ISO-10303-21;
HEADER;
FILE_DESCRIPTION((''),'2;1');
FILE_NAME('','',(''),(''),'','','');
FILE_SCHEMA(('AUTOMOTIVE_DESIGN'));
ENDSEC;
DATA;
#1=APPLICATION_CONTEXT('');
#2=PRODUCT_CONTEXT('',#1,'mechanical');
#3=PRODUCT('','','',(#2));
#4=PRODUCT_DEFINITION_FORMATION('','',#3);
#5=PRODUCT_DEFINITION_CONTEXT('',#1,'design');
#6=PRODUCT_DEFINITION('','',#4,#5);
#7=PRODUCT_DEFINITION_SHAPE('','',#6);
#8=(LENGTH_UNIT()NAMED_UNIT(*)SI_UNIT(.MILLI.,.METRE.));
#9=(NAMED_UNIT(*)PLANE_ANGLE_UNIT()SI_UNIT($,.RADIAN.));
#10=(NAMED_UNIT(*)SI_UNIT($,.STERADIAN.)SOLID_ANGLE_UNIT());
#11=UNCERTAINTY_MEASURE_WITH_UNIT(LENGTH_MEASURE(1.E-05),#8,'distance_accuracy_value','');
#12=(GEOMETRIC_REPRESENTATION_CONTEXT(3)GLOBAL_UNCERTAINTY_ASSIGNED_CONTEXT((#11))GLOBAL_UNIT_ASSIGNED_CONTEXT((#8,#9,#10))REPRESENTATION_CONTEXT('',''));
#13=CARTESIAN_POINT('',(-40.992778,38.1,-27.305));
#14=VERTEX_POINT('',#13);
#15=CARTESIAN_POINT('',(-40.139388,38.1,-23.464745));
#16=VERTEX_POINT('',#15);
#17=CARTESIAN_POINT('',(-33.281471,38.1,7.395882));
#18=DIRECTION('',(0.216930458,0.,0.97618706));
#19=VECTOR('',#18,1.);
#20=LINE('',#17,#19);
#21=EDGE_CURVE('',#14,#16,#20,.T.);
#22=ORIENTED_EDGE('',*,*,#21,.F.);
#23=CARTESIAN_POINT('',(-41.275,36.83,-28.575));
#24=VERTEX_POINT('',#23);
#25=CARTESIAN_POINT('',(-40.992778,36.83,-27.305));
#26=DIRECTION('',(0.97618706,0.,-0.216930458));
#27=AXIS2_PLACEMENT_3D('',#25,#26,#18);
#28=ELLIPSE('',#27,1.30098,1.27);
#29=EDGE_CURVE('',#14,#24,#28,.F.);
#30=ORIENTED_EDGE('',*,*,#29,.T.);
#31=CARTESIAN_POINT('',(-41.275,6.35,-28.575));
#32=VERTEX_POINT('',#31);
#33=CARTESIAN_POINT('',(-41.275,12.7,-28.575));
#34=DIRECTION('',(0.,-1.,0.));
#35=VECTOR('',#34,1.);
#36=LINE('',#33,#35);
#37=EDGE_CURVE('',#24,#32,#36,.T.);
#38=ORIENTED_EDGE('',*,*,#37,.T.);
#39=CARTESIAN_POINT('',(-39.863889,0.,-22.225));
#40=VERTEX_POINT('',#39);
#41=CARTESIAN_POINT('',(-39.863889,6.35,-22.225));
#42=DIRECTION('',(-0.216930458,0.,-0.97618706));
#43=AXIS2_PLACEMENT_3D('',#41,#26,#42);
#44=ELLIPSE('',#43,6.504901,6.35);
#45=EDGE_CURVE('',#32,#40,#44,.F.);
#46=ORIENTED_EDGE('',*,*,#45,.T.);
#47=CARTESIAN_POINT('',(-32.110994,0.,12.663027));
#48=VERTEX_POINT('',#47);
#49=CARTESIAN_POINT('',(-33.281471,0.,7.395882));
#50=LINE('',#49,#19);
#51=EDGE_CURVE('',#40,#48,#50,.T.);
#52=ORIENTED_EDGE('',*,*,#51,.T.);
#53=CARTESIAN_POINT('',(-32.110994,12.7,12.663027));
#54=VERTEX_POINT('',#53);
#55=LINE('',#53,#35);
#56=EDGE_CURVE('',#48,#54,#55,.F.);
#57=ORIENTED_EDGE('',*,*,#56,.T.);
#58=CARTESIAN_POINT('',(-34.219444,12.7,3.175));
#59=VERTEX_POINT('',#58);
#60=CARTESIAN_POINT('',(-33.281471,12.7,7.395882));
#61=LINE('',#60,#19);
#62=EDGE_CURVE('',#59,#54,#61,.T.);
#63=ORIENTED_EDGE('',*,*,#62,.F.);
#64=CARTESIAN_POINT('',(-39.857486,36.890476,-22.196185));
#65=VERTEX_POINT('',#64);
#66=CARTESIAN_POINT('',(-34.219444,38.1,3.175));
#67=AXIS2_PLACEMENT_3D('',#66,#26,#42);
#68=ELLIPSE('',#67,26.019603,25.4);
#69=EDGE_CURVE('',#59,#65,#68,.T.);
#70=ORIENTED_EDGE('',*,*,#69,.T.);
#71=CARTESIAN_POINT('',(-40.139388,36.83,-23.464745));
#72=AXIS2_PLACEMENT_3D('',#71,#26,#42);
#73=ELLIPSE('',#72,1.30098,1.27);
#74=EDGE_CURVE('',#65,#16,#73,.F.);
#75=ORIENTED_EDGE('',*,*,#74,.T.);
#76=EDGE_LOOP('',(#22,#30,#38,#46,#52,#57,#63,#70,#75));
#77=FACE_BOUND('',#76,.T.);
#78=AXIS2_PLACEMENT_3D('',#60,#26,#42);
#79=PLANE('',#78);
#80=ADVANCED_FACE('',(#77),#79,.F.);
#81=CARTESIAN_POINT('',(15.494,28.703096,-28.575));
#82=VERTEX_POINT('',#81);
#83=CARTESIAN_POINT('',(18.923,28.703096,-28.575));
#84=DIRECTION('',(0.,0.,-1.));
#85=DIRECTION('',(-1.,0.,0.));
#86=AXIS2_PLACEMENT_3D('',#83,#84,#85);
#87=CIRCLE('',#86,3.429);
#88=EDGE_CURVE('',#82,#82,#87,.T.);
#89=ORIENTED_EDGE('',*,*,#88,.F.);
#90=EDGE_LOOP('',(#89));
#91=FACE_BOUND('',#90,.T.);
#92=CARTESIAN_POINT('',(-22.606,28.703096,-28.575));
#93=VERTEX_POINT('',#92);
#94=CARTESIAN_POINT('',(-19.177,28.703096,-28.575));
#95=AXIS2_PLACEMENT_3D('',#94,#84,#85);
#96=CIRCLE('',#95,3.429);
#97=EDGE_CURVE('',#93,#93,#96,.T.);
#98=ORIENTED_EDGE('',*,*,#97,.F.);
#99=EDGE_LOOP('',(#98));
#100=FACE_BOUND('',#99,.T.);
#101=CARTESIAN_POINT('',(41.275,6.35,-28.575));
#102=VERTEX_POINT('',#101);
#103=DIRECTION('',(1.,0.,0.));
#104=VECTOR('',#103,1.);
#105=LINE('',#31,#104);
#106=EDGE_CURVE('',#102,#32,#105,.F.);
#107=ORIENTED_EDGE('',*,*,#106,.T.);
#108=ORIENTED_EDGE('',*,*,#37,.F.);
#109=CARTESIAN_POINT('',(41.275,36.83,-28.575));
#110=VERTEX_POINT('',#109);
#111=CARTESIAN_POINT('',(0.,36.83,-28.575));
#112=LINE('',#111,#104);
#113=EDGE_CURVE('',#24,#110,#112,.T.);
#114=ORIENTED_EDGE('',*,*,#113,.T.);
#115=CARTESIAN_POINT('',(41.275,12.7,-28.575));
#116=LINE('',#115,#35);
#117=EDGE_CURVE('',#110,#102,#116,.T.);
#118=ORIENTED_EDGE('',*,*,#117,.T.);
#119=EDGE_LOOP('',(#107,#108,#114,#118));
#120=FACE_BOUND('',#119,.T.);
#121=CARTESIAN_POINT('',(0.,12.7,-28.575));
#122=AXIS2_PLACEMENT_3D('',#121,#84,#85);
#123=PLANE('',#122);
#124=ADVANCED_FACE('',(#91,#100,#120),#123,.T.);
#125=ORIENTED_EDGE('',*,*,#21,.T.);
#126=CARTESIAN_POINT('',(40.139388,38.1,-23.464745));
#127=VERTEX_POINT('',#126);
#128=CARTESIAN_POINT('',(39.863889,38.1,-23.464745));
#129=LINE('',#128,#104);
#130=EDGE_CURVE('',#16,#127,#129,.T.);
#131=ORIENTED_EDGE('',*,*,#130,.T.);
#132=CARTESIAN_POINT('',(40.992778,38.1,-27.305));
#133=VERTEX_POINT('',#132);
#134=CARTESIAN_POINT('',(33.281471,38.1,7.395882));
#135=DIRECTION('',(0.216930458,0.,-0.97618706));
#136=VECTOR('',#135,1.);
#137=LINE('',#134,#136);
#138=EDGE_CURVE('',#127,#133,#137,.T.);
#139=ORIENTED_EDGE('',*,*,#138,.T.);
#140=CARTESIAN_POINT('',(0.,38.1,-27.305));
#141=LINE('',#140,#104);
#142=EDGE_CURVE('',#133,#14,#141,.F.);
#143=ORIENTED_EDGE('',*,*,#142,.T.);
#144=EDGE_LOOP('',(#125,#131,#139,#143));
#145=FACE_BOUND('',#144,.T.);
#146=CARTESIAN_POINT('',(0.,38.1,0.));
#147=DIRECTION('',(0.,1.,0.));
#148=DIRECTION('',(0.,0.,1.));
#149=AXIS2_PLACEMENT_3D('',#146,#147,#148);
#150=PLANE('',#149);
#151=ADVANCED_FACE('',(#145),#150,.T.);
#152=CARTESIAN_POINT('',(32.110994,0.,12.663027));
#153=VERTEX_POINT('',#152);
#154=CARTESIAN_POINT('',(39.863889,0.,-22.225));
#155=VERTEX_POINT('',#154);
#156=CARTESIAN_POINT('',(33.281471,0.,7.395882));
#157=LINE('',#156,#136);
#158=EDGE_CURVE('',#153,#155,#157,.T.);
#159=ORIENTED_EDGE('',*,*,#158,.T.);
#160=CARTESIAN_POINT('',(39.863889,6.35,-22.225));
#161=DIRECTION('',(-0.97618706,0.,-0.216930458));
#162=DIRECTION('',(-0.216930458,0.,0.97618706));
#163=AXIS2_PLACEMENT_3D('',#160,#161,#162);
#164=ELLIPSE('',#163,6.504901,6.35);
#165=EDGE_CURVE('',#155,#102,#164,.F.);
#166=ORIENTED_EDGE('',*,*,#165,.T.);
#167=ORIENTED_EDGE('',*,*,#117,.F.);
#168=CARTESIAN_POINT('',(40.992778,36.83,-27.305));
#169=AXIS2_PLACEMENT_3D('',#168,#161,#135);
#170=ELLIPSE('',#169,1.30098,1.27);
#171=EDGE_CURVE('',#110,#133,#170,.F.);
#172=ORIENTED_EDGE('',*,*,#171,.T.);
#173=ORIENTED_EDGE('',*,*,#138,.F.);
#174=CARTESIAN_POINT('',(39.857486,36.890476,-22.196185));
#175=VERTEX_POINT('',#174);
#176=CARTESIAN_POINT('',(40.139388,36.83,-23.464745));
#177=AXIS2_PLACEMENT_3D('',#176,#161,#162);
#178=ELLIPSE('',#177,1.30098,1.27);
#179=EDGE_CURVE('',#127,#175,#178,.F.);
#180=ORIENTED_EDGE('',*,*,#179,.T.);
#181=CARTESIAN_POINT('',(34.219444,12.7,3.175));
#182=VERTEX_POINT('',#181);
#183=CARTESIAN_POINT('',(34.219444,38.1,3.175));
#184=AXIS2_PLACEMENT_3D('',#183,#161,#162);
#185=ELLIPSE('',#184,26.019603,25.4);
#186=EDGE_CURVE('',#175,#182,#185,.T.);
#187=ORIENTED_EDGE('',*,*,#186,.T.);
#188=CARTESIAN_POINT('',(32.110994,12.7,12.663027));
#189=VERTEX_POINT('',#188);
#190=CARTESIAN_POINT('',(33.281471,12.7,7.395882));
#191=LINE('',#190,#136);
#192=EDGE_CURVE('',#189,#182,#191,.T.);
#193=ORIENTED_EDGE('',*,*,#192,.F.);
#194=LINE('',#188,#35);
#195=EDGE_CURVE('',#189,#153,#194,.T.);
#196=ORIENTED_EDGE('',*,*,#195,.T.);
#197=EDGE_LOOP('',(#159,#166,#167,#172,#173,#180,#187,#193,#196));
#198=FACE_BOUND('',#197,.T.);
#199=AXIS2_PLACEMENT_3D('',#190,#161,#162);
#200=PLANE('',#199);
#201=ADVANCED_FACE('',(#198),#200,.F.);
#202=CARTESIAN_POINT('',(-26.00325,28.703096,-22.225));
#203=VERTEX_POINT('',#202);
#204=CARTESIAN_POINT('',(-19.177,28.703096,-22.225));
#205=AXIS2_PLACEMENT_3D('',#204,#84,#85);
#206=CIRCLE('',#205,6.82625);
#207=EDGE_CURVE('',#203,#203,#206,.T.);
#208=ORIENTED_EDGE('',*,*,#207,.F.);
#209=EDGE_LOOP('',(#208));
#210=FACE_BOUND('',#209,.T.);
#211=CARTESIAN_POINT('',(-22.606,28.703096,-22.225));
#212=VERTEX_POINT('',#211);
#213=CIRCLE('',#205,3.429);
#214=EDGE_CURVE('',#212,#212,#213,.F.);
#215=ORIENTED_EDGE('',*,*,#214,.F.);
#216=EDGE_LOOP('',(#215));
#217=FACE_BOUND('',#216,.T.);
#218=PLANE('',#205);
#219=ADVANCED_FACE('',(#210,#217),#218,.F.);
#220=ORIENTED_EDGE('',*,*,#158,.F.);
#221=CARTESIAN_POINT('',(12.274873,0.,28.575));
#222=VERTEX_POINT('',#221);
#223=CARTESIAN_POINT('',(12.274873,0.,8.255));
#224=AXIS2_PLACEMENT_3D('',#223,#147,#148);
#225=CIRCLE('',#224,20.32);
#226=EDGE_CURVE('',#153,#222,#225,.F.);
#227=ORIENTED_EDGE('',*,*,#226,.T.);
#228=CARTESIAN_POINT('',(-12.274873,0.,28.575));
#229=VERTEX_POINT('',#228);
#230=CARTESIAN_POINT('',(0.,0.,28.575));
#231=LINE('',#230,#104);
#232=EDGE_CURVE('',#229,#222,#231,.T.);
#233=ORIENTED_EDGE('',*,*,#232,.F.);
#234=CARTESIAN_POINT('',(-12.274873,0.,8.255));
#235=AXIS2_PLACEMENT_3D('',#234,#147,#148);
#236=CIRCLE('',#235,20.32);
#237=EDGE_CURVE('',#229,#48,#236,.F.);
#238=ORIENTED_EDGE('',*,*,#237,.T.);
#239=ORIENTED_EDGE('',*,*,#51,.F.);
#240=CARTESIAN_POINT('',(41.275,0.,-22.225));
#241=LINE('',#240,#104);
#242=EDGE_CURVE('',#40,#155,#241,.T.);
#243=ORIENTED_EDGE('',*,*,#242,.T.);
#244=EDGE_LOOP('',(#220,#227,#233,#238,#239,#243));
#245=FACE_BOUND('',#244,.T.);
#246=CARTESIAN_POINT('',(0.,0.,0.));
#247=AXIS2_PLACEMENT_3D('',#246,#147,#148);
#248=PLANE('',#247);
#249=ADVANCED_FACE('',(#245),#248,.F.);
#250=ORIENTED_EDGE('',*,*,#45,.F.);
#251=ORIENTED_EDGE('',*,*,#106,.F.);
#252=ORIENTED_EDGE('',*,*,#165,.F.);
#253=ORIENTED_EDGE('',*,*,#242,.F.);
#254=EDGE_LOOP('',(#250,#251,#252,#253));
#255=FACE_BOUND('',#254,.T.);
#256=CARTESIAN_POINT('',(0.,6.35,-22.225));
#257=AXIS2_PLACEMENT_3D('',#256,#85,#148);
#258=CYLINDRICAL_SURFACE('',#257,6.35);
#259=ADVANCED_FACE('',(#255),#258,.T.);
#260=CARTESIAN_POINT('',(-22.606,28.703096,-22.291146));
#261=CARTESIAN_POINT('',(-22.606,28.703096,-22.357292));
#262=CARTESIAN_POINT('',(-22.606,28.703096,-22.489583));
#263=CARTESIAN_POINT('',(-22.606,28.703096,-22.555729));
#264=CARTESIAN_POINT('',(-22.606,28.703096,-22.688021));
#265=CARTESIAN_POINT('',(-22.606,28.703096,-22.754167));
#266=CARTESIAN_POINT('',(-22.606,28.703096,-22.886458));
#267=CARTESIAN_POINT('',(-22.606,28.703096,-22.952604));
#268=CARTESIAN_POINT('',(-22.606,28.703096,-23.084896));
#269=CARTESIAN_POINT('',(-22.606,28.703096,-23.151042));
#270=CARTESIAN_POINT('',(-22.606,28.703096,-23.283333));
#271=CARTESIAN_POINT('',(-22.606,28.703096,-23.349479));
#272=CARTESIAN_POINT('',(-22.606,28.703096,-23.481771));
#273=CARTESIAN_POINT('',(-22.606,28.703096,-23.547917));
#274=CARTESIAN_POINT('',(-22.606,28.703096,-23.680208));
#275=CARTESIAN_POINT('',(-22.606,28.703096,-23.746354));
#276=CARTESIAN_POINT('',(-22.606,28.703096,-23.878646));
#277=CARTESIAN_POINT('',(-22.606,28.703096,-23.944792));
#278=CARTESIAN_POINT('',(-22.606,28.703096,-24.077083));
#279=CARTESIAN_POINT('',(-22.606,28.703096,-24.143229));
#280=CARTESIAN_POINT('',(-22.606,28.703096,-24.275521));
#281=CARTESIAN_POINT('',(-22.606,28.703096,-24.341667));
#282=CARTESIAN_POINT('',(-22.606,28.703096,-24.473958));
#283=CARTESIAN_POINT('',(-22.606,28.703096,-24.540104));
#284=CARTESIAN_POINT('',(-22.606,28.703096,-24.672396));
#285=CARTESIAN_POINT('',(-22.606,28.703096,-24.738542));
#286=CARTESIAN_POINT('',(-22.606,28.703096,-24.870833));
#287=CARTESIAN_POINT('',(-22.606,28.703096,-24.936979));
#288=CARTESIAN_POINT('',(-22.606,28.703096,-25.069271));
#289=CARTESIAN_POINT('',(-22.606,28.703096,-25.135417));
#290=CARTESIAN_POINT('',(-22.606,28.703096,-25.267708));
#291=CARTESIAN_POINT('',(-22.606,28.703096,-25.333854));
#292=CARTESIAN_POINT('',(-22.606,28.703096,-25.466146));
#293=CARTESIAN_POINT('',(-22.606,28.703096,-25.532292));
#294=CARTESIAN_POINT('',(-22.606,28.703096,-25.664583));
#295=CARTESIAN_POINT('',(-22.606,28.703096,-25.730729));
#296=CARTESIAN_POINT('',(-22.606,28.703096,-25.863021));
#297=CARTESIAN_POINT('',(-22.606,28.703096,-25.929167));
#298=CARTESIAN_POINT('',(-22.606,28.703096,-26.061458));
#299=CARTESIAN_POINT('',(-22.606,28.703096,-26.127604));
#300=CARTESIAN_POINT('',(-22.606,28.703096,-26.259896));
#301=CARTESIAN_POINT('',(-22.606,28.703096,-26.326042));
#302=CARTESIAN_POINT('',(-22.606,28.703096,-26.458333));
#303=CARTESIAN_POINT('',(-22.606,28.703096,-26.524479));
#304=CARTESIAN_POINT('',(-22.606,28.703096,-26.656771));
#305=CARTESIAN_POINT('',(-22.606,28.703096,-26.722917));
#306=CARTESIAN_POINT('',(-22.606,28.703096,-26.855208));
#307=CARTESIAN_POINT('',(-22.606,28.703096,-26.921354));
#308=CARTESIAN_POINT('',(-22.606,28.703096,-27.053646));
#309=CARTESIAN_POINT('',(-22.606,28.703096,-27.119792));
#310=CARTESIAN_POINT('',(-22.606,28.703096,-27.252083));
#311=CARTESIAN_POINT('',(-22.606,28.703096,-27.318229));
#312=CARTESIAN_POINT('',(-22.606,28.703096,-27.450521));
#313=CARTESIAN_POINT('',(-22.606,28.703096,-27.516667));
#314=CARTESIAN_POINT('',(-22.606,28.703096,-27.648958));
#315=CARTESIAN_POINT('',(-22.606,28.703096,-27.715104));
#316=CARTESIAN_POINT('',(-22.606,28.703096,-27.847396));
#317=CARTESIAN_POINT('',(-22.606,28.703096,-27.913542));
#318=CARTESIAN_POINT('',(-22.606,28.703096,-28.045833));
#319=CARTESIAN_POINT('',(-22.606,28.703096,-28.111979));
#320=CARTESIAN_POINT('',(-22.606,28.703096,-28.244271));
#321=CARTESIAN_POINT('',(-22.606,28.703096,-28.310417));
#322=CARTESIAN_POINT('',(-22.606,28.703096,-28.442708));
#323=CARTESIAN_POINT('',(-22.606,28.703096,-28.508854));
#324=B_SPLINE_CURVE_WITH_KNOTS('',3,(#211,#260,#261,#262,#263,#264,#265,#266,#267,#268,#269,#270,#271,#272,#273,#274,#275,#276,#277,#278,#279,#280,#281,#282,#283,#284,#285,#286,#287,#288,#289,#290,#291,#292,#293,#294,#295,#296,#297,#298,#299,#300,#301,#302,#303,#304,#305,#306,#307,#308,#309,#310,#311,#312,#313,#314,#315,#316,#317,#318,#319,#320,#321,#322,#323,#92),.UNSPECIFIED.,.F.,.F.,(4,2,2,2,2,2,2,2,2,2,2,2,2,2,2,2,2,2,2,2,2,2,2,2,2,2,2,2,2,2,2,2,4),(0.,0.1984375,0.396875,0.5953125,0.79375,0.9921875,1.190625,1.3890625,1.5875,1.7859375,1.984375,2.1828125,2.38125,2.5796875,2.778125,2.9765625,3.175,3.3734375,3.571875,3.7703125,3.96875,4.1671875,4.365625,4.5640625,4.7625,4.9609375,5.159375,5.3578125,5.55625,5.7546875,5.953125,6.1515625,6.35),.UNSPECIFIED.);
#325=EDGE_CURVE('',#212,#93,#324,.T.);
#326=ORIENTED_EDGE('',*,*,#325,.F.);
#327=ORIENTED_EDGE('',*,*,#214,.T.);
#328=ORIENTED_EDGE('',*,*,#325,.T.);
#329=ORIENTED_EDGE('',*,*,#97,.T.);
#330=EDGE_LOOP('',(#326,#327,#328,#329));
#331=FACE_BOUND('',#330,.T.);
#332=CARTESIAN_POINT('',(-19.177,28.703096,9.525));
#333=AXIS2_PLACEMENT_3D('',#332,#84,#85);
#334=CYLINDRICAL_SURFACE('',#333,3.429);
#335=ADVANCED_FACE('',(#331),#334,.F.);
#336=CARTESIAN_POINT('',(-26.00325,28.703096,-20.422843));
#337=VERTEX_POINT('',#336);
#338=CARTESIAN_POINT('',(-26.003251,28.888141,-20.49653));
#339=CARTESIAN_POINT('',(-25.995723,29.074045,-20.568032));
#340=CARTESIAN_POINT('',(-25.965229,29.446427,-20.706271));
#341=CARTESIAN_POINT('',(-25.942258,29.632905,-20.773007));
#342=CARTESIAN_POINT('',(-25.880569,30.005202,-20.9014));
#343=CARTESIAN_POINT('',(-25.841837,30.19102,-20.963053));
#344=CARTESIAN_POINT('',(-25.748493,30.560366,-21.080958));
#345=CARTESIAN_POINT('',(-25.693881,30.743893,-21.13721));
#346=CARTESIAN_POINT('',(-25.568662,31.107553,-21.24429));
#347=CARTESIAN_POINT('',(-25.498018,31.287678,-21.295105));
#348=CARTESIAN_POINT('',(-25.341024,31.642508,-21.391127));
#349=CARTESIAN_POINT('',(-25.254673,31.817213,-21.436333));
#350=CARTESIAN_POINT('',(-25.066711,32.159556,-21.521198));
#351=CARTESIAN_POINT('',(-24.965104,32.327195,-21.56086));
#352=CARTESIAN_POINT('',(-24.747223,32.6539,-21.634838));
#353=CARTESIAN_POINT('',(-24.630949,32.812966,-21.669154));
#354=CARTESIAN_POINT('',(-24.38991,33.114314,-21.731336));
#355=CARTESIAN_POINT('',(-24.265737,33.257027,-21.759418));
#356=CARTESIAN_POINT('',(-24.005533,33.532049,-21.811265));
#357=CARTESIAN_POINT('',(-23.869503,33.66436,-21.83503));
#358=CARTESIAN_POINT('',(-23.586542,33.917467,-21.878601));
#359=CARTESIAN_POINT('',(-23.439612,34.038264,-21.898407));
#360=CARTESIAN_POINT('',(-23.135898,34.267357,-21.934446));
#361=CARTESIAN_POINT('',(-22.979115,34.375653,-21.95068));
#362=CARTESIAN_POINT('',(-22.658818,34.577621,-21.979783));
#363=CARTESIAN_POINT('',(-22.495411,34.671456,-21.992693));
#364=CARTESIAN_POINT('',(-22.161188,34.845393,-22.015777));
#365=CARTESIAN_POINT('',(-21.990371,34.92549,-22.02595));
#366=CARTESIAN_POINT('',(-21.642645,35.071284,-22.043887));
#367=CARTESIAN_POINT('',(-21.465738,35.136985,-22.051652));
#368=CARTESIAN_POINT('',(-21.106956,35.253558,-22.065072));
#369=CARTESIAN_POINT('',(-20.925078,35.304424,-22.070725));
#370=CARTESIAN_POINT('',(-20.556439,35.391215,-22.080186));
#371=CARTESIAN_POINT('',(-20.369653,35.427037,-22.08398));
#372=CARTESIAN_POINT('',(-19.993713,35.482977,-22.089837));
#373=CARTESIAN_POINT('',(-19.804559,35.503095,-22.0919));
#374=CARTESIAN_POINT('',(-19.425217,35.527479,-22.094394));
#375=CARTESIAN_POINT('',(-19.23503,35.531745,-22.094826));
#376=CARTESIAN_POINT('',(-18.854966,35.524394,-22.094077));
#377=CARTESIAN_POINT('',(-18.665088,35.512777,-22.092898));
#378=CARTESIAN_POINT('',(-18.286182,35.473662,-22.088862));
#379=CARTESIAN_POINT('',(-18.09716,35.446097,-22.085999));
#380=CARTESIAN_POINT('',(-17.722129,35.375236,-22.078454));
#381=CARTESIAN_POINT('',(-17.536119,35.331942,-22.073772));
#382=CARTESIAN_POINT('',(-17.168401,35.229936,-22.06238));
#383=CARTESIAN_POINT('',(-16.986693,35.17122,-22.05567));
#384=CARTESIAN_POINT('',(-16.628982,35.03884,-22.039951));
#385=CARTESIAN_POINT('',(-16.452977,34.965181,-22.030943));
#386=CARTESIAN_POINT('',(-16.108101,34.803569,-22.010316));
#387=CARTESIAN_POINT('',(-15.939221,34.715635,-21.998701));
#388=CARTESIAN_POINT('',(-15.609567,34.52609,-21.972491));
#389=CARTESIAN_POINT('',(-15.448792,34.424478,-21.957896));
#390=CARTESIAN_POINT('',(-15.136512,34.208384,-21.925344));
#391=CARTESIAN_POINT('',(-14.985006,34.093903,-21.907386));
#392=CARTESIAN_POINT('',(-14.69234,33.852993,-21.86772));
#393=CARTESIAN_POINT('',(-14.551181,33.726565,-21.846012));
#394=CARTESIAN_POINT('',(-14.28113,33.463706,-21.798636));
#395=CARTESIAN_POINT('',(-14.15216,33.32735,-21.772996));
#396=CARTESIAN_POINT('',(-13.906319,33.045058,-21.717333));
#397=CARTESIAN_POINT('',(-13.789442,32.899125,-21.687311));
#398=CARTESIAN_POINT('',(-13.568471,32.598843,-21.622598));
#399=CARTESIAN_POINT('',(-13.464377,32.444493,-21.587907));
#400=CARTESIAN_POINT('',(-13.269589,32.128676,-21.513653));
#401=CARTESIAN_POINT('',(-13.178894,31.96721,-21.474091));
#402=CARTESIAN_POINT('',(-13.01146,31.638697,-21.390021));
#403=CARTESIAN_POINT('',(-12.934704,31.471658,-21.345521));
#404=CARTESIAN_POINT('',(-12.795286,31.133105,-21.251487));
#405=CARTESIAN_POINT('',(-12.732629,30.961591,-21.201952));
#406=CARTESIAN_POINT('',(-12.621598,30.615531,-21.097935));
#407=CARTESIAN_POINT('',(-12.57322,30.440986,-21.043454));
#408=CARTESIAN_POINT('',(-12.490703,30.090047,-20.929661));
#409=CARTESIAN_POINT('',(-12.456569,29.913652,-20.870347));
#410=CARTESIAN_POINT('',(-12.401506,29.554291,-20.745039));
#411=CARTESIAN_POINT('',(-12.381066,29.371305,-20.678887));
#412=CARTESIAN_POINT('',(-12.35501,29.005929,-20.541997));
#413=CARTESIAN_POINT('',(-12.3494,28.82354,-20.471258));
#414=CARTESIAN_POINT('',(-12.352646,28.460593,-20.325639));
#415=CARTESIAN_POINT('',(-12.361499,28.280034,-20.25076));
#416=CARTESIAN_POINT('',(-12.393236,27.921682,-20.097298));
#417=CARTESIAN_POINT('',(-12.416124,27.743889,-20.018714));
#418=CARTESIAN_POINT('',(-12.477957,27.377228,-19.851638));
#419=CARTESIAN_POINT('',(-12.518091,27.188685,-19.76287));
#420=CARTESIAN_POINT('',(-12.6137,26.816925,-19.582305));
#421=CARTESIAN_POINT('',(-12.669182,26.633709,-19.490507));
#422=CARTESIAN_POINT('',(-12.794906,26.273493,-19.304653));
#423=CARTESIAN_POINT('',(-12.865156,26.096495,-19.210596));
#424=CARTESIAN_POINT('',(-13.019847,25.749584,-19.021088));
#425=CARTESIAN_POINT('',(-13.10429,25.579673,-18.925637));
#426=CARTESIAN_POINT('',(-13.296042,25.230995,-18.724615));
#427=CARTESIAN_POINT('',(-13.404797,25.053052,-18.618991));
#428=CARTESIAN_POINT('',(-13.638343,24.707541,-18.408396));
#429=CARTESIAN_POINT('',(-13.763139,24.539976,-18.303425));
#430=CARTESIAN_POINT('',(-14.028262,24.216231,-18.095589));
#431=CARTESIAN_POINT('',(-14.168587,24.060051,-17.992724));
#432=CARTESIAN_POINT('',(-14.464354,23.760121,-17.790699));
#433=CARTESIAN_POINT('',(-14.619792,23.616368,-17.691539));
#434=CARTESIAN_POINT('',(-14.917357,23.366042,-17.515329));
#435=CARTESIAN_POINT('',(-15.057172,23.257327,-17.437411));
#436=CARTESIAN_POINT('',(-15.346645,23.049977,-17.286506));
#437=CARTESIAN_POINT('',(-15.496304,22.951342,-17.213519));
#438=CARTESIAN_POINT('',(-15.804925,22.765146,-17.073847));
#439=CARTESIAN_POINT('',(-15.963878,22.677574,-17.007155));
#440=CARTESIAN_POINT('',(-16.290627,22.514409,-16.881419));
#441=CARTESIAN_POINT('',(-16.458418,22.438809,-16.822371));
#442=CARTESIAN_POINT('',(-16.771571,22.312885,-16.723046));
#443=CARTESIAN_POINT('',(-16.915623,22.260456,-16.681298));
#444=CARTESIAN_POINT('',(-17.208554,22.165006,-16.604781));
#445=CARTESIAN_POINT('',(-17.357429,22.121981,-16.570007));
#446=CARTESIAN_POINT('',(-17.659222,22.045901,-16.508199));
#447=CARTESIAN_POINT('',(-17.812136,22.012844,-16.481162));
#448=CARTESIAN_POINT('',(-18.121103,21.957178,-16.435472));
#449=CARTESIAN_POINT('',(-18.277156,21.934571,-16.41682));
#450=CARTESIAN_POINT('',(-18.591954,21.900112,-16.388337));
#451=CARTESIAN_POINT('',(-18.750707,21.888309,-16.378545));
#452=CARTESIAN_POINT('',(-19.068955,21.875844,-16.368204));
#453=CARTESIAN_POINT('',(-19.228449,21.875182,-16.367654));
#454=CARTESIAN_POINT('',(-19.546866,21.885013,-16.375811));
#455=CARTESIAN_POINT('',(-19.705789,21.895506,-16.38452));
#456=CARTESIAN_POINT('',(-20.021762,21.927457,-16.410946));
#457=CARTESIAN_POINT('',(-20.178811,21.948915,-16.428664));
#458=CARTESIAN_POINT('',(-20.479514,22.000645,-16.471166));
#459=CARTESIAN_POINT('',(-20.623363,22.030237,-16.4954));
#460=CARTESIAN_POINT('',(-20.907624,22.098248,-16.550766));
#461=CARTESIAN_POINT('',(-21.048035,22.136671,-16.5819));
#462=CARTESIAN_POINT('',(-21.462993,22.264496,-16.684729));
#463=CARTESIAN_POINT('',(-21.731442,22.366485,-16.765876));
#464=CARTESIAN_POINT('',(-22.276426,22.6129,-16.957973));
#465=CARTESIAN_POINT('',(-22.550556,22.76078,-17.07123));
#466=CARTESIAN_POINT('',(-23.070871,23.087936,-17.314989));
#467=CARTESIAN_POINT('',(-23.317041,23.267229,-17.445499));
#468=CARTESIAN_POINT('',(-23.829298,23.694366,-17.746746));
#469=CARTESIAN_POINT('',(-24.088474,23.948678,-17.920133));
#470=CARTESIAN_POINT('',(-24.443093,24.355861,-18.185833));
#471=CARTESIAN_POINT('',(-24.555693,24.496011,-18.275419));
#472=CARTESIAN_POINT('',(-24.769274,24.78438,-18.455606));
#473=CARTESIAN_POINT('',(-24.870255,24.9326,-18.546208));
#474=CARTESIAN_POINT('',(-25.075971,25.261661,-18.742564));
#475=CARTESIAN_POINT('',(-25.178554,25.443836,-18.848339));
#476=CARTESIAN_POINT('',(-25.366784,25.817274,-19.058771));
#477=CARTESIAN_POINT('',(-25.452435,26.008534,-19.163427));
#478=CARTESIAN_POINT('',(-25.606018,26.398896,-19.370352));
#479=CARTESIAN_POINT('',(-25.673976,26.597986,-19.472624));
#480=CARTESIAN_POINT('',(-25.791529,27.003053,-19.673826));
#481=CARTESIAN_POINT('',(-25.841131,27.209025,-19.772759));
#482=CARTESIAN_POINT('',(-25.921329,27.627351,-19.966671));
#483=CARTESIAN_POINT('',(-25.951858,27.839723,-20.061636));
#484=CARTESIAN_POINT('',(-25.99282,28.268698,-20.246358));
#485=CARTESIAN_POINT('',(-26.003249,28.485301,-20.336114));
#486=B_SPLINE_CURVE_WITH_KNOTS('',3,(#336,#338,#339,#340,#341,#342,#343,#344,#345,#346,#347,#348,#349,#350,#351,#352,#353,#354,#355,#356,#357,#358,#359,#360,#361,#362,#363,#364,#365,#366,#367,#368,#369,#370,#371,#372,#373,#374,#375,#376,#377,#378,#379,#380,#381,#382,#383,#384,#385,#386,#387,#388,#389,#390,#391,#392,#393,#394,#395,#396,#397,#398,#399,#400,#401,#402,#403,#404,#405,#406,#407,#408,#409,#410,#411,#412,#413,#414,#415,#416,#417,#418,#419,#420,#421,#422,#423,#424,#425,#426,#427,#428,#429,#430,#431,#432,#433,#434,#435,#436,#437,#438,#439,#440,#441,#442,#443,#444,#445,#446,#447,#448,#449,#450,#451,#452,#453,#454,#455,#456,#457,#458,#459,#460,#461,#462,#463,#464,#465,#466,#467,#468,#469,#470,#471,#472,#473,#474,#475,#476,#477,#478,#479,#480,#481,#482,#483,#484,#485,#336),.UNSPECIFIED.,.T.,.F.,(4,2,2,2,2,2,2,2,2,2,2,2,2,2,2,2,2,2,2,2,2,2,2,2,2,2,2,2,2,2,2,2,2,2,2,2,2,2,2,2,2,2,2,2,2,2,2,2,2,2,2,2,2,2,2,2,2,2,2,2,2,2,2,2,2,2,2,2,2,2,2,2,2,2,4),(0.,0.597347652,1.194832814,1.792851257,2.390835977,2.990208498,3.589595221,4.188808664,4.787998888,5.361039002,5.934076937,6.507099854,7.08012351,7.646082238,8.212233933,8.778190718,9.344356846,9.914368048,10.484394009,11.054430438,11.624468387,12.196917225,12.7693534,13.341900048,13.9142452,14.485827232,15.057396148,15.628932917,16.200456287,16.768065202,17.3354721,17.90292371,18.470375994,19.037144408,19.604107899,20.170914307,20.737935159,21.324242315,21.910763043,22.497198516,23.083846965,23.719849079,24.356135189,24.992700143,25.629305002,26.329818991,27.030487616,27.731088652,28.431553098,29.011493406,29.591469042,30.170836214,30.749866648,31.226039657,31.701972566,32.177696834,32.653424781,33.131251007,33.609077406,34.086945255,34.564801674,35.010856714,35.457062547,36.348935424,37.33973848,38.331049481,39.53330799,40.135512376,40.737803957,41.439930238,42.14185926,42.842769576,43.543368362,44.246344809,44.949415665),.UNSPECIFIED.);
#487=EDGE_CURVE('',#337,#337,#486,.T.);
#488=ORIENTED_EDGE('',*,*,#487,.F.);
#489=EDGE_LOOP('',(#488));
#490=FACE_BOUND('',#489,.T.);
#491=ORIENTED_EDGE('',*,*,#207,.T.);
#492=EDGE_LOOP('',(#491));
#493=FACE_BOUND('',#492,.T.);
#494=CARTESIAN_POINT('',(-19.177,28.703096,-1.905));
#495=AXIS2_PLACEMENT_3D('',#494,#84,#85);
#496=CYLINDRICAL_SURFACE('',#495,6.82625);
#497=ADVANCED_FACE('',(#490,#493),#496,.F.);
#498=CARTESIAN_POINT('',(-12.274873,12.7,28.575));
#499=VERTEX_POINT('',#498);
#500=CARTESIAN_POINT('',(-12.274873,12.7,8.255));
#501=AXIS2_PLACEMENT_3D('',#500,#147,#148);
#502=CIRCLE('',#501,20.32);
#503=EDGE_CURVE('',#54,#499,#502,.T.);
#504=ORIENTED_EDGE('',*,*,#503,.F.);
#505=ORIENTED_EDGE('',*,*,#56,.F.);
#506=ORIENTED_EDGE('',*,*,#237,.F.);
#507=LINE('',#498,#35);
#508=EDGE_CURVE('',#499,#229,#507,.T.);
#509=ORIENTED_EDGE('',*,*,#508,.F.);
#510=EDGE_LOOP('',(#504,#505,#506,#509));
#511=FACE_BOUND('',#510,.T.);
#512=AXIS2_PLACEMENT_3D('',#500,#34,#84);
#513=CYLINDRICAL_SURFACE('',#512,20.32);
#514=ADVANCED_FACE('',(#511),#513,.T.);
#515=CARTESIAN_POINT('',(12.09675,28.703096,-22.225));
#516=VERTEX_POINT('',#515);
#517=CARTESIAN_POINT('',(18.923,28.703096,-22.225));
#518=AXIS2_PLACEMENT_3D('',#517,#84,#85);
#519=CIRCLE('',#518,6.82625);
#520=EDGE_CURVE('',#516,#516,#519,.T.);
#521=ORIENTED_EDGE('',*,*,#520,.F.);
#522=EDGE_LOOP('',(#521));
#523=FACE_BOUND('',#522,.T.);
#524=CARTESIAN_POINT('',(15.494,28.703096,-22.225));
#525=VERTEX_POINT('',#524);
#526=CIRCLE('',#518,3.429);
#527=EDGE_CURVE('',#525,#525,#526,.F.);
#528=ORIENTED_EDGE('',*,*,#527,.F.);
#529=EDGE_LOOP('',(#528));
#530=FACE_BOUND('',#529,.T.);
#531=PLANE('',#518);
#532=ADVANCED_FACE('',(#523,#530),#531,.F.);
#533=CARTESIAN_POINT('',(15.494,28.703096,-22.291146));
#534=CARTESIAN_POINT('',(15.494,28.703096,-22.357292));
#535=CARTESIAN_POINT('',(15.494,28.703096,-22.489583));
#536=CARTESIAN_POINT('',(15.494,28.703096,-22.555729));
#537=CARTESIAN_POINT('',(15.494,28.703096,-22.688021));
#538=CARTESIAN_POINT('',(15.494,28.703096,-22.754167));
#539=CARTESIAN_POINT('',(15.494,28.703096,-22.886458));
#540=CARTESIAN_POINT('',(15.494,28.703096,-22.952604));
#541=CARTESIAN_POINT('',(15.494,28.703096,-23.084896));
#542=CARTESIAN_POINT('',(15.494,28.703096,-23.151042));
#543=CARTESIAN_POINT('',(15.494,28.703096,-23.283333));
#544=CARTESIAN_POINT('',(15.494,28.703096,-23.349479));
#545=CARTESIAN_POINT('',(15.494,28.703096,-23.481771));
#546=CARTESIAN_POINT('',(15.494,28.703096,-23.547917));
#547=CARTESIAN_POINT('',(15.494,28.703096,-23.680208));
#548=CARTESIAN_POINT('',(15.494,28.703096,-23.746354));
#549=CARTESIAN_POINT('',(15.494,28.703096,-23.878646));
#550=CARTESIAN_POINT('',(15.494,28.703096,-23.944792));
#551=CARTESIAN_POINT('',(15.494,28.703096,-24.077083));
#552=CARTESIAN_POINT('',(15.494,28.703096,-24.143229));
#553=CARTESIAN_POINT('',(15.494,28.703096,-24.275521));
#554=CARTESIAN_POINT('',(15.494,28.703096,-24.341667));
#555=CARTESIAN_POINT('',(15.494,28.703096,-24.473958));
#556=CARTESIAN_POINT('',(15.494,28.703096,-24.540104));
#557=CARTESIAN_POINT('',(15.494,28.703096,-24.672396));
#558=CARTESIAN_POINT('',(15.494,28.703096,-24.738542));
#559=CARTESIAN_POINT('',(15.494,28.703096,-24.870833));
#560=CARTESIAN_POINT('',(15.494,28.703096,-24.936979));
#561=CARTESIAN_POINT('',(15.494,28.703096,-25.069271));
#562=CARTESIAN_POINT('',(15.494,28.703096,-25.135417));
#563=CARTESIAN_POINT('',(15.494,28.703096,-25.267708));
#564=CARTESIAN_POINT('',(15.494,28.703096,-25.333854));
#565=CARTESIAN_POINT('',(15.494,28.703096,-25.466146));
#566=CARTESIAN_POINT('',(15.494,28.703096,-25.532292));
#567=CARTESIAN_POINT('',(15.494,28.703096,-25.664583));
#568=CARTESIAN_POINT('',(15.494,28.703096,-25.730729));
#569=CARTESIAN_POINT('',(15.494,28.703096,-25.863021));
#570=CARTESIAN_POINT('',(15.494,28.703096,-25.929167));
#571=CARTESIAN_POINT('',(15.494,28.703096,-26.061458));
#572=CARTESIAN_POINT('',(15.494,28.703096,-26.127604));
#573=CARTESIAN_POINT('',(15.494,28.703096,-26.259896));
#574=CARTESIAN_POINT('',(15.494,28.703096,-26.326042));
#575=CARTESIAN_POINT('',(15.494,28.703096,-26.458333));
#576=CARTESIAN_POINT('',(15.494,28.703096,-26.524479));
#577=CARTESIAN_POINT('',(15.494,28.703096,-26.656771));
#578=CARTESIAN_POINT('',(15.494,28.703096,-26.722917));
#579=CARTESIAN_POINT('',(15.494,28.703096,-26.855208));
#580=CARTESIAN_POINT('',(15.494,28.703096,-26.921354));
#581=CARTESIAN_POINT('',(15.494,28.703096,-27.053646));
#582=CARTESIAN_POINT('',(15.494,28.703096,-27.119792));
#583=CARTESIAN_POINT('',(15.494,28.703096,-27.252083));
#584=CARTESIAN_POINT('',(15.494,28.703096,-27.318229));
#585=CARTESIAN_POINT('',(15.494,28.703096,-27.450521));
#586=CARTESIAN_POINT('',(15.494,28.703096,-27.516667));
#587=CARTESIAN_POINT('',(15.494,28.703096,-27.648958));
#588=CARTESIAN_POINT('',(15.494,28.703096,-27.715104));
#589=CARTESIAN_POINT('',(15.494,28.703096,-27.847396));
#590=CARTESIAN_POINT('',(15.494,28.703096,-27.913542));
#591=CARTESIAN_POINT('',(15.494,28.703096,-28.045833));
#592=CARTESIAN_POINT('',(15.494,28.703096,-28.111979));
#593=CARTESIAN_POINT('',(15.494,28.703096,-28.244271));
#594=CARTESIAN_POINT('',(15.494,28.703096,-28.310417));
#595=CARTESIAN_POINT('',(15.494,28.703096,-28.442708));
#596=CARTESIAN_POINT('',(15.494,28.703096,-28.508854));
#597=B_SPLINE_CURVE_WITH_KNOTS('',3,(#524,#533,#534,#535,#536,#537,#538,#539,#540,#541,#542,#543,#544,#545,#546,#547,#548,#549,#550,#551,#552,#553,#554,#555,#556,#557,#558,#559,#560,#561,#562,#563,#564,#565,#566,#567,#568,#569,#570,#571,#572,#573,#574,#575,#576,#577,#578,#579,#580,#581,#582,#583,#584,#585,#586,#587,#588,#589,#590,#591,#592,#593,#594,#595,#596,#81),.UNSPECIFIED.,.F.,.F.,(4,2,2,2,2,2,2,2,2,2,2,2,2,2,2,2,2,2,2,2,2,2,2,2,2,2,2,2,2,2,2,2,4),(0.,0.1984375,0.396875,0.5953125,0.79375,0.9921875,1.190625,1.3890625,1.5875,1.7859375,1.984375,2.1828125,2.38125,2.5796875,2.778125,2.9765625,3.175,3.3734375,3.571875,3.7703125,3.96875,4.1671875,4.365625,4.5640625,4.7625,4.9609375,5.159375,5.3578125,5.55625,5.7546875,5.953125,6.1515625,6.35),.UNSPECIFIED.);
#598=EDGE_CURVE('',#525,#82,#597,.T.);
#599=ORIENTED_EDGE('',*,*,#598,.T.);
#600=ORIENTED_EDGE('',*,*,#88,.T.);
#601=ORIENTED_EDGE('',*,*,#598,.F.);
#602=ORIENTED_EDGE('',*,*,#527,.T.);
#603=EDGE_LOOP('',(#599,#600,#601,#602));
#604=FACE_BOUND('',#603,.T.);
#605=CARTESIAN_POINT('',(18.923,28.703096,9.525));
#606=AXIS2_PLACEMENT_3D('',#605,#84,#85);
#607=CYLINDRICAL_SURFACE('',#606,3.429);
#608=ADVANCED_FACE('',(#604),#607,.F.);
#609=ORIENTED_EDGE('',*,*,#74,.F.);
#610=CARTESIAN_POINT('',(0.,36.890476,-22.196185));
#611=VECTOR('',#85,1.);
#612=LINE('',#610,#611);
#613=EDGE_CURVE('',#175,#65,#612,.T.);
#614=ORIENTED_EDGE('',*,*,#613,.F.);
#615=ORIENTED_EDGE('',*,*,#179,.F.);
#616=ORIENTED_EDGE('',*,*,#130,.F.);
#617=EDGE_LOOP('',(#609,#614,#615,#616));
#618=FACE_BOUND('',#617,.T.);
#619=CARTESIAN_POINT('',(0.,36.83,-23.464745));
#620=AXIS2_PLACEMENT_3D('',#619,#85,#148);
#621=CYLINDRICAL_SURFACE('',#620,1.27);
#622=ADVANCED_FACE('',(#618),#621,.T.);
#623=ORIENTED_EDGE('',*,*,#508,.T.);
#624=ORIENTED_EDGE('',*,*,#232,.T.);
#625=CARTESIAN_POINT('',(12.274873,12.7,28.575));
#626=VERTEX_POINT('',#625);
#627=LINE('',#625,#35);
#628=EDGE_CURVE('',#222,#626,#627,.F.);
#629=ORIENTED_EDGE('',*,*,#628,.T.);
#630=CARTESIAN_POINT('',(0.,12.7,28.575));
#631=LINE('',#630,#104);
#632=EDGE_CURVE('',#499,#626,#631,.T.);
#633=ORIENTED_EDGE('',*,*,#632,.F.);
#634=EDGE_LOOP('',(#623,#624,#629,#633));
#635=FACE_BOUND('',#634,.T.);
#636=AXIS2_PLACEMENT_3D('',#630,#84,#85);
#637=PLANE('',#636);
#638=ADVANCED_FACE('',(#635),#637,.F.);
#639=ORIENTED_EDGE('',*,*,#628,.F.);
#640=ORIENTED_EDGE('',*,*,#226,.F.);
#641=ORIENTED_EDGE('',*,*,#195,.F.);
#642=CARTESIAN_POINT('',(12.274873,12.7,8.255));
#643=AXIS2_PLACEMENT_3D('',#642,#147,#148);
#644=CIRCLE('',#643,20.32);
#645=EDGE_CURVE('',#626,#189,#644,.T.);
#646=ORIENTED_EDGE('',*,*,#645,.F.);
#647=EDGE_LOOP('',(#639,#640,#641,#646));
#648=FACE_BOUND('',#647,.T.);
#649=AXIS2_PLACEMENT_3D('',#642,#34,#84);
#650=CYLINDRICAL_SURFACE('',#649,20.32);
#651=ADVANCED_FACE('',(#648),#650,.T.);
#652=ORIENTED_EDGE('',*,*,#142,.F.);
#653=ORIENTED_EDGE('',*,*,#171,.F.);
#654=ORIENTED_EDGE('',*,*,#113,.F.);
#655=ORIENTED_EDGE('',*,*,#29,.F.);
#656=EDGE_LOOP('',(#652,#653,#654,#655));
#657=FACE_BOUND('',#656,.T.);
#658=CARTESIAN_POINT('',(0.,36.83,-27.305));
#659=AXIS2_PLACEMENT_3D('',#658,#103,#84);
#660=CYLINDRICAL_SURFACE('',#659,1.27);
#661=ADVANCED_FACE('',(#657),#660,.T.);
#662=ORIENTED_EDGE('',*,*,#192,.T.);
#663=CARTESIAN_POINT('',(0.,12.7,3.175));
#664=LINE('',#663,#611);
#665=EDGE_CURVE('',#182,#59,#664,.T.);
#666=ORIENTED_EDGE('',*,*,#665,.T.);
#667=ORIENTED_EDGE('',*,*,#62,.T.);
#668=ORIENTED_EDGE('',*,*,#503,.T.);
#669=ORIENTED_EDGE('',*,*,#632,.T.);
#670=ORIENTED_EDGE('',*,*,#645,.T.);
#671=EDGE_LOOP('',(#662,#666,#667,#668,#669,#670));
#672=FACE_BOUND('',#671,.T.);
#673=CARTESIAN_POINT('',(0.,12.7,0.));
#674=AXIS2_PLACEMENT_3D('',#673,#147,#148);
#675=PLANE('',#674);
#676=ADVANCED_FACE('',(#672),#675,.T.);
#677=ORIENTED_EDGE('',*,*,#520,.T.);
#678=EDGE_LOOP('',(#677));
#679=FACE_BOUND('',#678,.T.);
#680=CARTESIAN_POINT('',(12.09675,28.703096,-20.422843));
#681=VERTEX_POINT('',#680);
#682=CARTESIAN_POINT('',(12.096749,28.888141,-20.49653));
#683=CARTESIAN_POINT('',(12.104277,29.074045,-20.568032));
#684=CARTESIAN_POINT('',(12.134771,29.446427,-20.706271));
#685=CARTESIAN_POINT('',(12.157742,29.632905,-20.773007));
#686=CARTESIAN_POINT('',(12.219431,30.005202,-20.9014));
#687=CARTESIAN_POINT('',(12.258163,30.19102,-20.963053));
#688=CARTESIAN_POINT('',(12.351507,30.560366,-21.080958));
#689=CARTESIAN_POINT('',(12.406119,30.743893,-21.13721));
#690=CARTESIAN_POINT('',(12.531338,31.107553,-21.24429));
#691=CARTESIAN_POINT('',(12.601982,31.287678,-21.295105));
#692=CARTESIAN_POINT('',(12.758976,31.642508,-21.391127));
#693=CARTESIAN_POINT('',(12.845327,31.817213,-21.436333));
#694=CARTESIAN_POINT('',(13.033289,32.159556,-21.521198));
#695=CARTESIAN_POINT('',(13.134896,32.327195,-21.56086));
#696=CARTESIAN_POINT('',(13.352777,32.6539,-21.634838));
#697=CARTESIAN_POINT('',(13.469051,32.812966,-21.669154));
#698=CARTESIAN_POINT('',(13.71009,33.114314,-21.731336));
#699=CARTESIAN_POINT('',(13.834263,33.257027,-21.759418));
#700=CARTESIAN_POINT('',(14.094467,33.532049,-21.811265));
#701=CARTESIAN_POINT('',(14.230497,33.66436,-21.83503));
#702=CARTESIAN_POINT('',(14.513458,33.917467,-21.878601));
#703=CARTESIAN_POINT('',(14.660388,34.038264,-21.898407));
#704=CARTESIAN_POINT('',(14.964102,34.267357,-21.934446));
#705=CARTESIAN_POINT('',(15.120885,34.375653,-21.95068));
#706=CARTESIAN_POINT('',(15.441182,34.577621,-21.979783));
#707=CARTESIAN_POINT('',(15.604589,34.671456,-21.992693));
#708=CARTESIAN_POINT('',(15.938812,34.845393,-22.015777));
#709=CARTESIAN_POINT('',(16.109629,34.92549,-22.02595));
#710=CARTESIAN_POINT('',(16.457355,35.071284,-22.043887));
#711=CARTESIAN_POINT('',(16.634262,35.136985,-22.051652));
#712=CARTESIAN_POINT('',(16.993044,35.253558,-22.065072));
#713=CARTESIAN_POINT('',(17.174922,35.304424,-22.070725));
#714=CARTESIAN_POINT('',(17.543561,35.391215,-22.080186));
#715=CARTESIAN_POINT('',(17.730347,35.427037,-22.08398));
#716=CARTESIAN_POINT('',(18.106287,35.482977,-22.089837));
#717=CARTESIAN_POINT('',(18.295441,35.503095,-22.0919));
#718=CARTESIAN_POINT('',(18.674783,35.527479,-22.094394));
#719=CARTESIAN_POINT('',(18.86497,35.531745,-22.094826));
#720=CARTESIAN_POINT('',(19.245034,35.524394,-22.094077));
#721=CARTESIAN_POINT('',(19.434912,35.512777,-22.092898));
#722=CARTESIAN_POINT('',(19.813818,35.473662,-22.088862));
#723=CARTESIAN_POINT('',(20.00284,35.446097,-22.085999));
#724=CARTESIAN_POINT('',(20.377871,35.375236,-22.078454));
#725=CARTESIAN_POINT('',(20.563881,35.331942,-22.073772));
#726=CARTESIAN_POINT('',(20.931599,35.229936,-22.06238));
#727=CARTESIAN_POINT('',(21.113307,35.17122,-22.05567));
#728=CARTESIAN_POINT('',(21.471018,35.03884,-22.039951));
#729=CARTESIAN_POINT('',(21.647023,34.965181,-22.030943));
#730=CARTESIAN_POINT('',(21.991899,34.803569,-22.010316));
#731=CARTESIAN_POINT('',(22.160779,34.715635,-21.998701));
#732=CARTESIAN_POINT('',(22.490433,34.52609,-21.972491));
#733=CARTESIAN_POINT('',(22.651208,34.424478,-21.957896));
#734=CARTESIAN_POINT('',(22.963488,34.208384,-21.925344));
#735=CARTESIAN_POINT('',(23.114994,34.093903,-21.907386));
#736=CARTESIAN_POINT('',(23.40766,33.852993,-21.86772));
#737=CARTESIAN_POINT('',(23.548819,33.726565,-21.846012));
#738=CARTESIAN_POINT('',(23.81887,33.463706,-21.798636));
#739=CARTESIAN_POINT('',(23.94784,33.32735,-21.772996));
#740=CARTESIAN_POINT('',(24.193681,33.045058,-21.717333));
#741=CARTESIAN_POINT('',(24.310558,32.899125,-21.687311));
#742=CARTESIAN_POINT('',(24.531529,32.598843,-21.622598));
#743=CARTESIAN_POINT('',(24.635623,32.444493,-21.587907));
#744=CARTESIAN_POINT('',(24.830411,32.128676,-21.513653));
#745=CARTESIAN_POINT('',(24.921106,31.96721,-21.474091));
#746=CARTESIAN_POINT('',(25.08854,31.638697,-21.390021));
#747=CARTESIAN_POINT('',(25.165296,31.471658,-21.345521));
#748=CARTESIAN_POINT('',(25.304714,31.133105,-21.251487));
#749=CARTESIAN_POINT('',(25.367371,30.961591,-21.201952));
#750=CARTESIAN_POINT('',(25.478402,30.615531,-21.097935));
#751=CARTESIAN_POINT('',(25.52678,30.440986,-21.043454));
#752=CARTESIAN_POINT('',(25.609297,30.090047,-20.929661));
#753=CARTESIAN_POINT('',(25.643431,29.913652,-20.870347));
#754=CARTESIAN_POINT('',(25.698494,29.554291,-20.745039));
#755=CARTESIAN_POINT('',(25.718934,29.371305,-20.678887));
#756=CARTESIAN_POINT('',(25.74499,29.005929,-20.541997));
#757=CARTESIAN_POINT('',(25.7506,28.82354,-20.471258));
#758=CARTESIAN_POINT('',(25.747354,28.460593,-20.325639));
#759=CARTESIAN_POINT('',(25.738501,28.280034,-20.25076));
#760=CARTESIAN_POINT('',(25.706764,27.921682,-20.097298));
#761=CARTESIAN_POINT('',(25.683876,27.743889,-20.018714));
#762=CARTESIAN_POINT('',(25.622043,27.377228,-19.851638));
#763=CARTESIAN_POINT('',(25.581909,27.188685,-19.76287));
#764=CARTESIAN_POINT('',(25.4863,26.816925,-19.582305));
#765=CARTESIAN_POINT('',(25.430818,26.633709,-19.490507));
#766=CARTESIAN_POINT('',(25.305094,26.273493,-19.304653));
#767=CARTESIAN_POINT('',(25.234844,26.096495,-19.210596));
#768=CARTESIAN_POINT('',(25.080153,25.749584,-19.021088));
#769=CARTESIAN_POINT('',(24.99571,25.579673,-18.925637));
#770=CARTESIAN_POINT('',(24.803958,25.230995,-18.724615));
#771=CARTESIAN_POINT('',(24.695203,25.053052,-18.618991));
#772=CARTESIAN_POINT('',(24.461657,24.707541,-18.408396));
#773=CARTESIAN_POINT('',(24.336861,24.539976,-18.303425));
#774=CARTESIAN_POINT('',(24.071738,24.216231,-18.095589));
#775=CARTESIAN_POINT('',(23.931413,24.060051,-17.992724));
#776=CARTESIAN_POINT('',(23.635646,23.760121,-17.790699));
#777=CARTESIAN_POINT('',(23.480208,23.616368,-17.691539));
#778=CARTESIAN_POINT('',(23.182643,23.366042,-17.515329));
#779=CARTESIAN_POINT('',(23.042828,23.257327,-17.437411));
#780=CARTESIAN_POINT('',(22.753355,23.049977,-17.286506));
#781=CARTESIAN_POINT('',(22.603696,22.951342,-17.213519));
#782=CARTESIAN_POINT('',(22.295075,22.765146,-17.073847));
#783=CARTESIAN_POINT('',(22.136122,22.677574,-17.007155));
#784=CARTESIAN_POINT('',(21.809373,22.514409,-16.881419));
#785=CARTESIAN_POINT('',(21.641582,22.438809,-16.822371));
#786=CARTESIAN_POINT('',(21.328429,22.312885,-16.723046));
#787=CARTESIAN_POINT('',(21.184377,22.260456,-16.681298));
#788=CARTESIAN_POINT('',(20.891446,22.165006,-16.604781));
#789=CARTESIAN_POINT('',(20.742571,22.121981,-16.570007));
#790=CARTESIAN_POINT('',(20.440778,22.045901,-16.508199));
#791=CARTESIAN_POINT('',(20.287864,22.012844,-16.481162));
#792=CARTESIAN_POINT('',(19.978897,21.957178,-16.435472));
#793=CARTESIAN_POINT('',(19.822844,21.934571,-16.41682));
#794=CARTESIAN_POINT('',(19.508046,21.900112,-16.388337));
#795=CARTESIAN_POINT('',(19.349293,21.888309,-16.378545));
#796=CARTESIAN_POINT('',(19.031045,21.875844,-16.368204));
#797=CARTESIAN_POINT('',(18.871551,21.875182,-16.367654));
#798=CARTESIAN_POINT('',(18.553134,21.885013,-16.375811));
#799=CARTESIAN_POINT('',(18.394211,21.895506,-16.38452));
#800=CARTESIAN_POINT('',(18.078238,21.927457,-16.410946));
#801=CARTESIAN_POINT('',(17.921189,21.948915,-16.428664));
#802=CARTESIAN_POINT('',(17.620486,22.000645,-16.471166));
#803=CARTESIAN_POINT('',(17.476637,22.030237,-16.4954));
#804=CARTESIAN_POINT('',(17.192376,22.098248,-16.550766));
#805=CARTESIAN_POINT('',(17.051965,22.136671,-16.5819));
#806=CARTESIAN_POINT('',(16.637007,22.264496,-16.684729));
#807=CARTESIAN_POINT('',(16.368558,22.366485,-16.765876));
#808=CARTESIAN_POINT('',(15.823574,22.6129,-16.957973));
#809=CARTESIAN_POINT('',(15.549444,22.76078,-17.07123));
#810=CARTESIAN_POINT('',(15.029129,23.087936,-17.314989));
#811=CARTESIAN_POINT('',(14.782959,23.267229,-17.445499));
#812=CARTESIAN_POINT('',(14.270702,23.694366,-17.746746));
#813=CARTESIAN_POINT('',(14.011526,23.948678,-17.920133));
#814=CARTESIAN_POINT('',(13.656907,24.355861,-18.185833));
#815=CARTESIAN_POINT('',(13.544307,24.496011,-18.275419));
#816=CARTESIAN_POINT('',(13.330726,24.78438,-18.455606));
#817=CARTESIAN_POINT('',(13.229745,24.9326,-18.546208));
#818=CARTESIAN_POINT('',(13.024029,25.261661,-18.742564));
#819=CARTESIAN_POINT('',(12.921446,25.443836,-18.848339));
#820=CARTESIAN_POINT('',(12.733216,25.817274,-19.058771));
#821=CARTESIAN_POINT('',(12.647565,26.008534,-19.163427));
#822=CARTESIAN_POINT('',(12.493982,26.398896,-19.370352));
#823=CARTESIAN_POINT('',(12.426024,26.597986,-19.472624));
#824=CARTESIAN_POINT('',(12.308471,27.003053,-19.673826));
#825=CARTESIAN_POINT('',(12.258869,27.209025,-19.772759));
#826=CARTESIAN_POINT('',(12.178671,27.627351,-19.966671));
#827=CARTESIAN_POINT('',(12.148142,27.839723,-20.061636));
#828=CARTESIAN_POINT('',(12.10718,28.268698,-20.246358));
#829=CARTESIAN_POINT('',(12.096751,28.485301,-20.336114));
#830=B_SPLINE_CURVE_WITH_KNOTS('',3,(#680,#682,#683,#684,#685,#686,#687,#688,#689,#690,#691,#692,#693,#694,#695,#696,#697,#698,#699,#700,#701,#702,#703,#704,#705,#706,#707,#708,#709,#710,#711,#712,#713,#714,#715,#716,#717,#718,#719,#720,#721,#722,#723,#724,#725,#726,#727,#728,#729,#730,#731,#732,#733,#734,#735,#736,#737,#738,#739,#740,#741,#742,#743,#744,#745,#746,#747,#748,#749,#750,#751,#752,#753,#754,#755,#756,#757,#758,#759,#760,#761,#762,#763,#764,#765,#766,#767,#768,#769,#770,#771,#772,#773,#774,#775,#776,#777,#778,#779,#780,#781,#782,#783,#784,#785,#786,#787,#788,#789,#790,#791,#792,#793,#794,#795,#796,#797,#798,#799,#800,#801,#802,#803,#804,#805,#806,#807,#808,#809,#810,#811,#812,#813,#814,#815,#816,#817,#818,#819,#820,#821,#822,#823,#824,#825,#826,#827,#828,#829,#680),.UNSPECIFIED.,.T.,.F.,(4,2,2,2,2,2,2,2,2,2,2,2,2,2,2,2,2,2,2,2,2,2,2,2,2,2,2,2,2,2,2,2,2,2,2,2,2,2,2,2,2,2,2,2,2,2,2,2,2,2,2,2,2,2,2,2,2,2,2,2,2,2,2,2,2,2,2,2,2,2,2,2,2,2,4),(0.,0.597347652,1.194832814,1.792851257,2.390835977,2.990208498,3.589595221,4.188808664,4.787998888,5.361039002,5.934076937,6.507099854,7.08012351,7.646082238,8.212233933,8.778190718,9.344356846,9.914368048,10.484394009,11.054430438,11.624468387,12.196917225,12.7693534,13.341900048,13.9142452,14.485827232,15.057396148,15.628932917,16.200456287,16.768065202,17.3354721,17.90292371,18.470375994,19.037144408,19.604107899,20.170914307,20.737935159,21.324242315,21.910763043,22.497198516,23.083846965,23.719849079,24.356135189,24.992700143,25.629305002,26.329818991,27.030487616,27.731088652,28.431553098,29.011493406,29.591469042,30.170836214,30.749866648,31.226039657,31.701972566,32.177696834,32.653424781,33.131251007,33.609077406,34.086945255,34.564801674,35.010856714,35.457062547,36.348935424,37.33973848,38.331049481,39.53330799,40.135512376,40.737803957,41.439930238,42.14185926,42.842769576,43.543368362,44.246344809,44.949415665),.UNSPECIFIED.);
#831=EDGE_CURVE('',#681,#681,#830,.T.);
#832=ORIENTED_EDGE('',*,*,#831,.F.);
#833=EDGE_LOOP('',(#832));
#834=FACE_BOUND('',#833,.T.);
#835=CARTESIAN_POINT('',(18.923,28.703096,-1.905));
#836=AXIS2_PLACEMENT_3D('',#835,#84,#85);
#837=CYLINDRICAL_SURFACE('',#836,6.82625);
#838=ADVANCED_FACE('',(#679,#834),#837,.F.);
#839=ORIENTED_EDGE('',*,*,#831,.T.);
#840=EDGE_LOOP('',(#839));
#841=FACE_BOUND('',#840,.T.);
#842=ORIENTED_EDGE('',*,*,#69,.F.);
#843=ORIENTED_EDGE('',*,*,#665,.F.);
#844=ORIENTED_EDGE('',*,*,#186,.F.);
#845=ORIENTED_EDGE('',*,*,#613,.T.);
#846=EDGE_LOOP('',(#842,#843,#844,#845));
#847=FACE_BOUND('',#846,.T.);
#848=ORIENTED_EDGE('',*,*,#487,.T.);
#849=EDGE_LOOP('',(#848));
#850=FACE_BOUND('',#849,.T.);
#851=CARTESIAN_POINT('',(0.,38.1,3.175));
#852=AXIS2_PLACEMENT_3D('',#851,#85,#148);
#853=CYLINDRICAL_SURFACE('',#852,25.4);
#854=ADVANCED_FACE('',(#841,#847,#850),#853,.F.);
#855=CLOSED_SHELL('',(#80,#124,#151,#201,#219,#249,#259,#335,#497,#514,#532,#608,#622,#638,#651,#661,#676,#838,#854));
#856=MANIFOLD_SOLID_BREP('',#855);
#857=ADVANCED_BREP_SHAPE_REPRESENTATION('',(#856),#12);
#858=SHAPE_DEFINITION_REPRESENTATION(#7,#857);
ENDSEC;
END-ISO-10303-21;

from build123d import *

# Parameters (mm, degrees)
BOSS_EXTRUDE1_DEPTH = 12.7
BOSS_EXTRUDE2_DEPTH = 38.1
FILLET1_R           = 25.4
FILLET2_R           = 20.32
FILLET3_R           = 6.35
FILLET4_R           = 1.2699999999999994
CUT_EXTRUDE1_DEPTH  = 38.1
SKETCH5_R           = 6.826249999999999
SKETCH5_R_2         = 6.826250000000001
CUT_EXTRUDE4_DEPTH  = 20.32


with BuildPart() as part:
    # Sketch1 → Boss-Extrude1 (new body)
    with BuildSketch(Plane(origin=(0, 0, 0), x_dir=(1, 0, 0), z_dir=(0, 1, 0))):
        Polygon((39.86388888888888, 22.225000000000012), (-39.86388888888888, 22.225), (-28.574999999999996, -28.57499999999998), (28.575000000000006, -28.574999999999978), align=None)
        Polygon((41.27499999999999, 28.575000000000014), (-41.275000000000006, 28.575000000000003), (-39.863888888888894, 22.225), (39.86388888888888, 22.225000000000012), align=None)
    extrude(amount=BOSS_EXTRUDE1_DEPTH)

    # Sketch1<5> → Boss-Extrude2 (add)
    with BuildSketch(Plane(origin=(0, 0, 0), x_dir=(1, 0, 0), z_dir=(0, 1, 0))):
        Polygon((41.27499999999999, 28.575000000000014), (-41.275000000000006, 28.575000000000003), (-39.863888888888894, 22.225), (39.86388888888888, 22.225000000000012), align=None)
    extrude(amount=BOSS_EXTRUDE2_DEPTH)

    # Fillet1
    fillet1_edges = [part.edges().sort_by_distance(p)[0] for p in [
        (0, 12.7, -22.22500000000001),
    ]]
    fillet(fillet1_edges, radius=FILLET1_R - 0.0001)  # a hair under: the kernel refuses the full size

    # Fillet2
    fillet2_edges = [part.edges().sort_by_distance(p)[0] for p in [
        (28.575000000000006, 6.35, 28.574999999999978),
        (-28.574999999999996, 6.35, 28.57499999999998),
    ]]
    fillet(fillet2_edges, radius=FILLET2_R)

    # Fillet3
    fillet3_edges = [part.edges().sort_by_distance(p)[0] for p in [
        (-7.11e-15, 0, -28.57500000000001),
    ]]
    fillet(fillet3_edges, radius=FILLET3_R)

    # Fillet4
    fillet4_edges = [part.edges().sort_by_distance(p)[0] for p in [
        (0, 38.1, -22.22500000000001),
        (-7.11e-15, 38.1, -28.57500000000001),
    ]]
    fillet(fillet4_edges, radius=FILLET4_R)

    # Sketch4 → Cut-Extrude1 (cut)
    with BuildSketch(Plane(origin=(-3.6e-15, 0, -28.57500000000001), x_dir=(-1, 0, 1.3e-16), z_dir=(-1.3e-16, 0, -1))):
        with BuildLine():
            ThreePointArc((-22.35199999999955, 28.703096211960737), (-18.92299999999955, 25.27409621196074), (-15.493999999999552, 28.703096211960737))
            Line((-15.493999999999552, 28.70309621196053), (-22.35199999999955, 28.70309621196053))
        make_face()
        with BuildLine():
            Line((-22.35199999999955, 28.70309621196053), (-15.493999999999552, 28.70309621196053))
            ThreePointArc((-15.493999999999552, 28.703096211960737), (-18.92299999999955, 32.132096211960736), (-22.35199999999955, 28.703096211960737))
        make_face()
        with BuildLine():
            ThreePointArc((15.748000000000676, 28.70309621196054), (19.177000000000678, 25.274096211960536), (22.60600000000068, 28.70309621196054))
            Line((22.60600000000068, 28.703096211960535), (15.748000000000676, 28.703096211960535))
        make_face()
        with BuildLine():
            Line((15.748000000000676, 28.703096211960535), (22.60600000000068, 28.703096211960535))
            ThreePointArc((22.60600000000068, 28.70309621196054), (19.177000000000678, 32.132096211960544), (15.748000000000676, 28.70309621196054))
        make_face()
    extrude(amount=-CUT_EXTRUDE1_DEPTH, mode=Mode.SUBTRACT)

    # Sketch5 → Cut-Extrude4 (cut)
    with BuildSketch(Plane(origin=(-2.8e-15, 0, -22.22500000000001), x_dir=(-1, 0, 1.3e-16), z_dir=(-1.3e-16, 0, -1))):
        with Locations((-18.92299999999955, 28.703096211960737)):
            Circle(SKETCH5_R)
        with Locations((19.177000000000678, 28.70309621196054)):
            Circle(SKETCH5_R_2)
    extrude(amount=-CUT_EXTRUDE4_DEPTH, mode=Mode.SUBTRACT)


solid = part.part
